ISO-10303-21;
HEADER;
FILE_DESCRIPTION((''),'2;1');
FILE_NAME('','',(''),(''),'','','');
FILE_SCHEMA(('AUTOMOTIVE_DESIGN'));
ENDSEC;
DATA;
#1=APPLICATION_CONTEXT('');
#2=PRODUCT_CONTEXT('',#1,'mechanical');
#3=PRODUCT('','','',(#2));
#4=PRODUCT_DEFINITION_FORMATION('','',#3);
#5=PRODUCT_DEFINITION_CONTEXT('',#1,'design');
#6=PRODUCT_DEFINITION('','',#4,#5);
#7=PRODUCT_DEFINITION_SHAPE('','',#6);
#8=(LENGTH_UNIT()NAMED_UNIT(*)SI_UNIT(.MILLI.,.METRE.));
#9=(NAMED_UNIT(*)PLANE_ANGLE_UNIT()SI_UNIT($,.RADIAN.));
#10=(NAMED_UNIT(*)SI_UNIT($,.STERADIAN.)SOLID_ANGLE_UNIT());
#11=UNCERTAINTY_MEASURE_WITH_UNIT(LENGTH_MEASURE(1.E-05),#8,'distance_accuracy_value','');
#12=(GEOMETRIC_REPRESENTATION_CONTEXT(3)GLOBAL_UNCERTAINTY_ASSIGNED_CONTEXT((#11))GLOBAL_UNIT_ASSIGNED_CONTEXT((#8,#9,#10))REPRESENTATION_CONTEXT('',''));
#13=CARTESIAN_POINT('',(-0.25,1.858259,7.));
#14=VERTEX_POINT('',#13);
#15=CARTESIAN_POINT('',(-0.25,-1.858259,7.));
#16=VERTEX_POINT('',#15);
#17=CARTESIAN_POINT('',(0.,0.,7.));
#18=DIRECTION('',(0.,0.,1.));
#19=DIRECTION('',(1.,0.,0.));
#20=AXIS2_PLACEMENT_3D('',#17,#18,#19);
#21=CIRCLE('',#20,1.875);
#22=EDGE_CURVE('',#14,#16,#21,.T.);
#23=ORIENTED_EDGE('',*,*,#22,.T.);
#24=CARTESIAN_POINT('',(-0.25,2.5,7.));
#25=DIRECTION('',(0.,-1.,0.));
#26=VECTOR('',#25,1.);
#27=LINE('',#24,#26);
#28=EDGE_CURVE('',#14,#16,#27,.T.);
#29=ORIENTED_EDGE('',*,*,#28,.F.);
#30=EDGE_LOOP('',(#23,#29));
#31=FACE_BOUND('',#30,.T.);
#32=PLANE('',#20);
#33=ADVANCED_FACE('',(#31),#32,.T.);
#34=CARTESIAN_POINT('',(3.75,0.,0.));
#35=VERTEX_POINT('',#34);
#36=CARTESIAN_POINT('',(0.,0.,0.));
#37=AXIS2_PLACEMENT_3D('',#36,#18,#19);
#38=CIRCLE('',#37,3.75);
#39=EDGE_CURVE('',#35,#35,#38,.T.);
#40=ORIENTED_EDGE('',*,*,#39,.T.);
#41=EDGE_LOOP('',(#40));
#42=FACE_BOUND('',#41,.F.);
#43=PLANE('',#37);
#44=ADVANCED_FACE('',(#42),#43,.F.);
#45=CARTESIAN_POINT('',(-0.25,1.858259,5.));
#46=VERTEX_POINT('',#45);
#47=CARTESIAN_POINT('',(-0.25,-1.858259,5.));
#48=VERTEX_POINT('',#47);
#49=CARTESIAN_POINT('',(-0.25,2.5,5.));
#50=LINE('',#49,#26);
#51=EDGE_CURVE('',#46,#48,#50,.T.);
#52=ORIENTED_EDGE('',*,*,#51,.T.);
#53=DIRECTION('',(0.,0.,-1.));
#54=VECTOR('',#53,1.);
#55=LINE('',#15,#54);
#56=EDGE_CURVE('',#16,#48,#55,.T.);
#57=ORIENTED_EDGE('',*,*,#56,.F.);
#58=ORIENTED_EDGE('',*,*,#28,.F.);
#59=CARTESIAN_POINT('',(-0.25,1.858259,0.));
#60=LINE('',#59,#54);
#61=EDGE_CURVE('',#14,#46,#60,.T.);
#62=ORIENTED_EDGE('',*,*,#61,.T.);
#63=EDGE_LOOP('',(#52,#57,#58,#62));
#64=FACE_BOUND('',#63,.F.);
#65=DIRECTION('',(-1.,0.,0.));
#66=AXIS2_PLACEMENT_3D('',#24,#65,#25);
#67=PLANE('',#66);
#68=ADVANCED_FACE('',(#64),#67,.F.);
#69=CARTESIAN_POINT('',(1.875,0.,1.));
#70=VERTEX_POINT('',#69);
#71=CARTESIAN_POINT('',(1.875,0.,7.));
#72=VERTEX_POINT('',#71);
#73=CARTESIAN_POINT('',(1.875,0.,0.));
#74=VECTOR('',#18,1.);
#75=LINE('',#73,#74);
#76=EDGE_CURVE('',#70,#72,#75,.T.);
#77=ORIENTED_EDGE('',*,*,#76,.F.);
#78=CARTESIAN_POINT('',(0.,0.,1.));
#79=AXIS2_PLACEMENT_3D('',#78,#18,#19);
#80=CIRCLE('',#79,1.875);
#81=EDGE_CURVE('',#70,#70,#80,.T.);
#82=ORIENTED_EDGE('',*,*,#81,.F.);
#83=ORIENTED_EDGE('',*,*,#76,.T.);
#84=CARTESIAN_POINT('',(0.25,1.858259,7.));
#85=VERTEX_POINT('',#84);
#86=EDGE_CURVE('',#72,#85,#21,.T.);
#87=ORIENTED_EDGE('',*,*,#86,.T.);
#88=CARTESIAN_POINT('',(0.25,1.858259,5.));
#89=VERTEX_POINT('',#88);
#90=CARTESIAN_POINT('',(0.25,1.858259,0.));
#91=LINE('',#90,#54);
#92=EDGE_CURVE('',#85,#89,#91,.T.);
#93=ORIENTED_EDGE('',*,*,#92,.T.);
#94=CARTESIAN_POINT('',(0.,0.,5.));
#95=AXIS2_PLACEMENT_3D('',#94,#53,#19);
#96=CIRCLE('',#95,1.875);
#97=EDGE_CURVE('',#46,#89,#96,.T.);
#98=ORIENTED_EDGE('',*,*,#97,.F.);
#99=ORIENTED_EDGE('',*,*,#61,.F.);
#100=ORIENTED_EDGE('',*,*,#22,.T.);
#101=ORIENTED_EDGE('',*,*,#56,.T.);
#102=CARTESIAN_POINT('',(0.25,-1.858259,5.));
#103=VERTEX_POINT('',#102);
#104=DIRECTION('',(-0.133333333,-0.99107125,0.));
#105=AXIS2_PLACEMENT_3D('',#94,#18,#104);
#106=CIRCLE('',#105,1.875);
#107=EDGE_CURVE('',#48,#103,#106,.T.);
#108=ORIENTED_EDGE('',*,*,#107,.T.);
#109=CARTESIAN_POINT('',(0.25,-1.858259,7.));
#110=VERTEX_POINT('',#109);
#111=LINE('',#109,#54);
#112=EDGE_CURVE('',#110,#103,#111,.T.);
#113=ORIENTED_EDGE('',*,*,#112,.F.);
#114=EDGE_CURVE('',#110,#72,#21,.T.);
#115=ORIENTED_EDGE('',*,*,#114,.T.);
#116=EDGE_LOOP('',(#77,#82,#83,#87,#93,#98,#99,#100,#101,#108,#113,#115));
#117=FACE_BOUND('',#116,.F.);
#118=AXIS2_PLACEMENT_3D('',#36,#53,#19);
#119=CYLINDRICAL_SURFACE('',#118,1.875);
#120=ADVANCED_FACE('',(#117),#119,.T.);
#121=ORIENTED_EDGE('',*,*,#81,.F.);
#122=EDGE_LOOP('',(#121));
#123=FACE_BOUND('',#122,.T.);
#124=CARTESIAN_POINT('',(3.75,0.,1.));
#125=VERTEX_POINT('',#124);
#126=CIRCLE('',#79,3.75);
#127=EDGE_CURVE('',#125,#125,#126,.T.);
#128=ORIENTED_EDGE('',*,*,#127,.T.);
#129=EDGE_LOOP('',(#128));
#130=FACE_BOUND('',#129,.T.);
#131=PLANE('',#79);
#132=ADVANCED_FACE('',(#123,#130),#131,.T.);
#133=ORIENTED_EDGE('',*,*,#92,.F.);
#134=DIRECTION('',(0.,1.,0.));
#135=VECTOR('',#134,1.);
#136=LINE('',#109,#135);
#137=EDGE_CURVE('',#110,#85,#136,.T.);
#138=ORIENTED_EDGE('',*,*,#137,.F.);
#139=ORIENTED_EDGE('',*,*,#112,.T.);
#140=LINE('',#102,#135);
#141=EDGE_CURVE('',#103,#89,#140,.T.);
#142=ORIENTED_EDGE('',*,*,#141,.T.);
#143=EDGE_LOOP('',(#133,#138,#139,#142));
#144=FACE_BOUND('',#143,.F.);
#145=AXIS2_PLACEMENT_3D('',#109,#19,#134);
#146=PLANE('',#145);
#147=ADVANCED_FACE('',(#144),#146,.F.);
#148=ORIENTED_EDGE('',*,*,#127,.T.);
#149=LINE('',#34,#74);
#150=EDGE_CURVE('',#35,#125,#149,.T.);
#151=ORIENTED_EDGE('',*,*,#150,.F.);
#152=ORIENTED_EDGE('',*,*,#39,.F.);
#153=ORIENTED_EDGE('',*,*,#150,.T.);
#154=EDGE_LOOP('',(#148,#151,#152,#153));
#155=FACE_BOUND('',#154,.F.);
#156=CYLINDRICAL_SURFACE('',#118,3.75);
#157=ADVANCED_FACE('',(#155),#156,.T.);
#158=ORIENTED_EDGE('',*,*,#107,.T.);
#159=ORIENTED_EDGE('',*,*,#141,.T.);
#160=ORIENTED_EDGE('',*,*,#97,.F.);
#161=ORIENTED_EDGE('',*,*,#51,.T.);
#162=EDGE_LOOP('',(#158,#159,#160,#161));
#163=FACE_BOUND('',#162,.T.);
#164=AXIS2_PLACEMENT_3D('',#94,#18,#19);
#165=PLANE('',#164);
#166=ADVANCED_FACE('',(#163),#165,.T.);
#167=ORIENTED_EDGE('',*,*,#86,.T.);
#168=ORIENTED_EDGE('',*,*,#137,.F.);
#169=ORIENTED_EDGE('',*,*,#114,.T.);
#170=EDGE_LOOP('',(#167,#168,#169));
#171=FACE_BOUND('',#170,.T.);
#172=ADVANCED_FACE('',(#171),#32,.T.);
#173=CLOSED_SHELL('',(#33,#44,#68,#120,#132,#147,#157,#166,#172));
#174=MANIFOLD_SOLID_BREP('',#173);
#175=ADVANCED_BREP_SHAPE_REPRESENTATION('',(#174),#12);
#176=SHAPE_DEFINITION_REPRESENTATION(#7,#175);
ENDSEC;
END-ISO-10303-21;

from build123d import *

# Parameters (mm, degrees)
F0_R     = 1.875
F1_DEPTH = 7
F0_R_2   = 3.75
F2_DEPTH = 1
F4_DEPTH = 2


with BuildPart() as f1:
    # F0 (on Top) → F1 (new body)
    with BuildSketch(Plane.XY):
        Circle(F0_R)
    extrude(amount=F1_DEPTH)

    # F0 (on Top) → F2 (join)
    with BuildSketch(Plane.XY):
        Circle(F0_R_2)
        Circle(F0_R, mode=Mode.SUBTRACT)
    extrude(amount=F2_DEPTH)

    # F3 (on face) → F4 (cut)
    with BuildSketch(Plane.XY.offset(7)):
        with BuildLine():
            Line((-0.25, 1.8582585934), (-0.25, -1.8582585934))
            ThreePointArc((-0.25, -1.8582585934), (0, -1.875), (0.25, -1.8582585934))
            Line((0.25, -1.8582585934), (0.25, 1.8582585934))
            ThreePointArc((0.25, 1.8582585934), (0, 1.875), (-0.25, 1.8582585934))
        make_face()
        with BuildLine():
            Line((-0.25, 2.5), (-0.25, 1.8582585934))
            ThreePointArc((-0.25, 1.8582585934), (0, 1.875), (0.25, 1.8582585934))
            Line((0.25, 1.8582585934), (0.25, 2.5))
            Line((0.25, 2.5), (-0.25, 2.5))
        make_face()
    extrude(amount=-F4_DEPTH, mode=Mode.SUBTRACT)


solid = f1.part
